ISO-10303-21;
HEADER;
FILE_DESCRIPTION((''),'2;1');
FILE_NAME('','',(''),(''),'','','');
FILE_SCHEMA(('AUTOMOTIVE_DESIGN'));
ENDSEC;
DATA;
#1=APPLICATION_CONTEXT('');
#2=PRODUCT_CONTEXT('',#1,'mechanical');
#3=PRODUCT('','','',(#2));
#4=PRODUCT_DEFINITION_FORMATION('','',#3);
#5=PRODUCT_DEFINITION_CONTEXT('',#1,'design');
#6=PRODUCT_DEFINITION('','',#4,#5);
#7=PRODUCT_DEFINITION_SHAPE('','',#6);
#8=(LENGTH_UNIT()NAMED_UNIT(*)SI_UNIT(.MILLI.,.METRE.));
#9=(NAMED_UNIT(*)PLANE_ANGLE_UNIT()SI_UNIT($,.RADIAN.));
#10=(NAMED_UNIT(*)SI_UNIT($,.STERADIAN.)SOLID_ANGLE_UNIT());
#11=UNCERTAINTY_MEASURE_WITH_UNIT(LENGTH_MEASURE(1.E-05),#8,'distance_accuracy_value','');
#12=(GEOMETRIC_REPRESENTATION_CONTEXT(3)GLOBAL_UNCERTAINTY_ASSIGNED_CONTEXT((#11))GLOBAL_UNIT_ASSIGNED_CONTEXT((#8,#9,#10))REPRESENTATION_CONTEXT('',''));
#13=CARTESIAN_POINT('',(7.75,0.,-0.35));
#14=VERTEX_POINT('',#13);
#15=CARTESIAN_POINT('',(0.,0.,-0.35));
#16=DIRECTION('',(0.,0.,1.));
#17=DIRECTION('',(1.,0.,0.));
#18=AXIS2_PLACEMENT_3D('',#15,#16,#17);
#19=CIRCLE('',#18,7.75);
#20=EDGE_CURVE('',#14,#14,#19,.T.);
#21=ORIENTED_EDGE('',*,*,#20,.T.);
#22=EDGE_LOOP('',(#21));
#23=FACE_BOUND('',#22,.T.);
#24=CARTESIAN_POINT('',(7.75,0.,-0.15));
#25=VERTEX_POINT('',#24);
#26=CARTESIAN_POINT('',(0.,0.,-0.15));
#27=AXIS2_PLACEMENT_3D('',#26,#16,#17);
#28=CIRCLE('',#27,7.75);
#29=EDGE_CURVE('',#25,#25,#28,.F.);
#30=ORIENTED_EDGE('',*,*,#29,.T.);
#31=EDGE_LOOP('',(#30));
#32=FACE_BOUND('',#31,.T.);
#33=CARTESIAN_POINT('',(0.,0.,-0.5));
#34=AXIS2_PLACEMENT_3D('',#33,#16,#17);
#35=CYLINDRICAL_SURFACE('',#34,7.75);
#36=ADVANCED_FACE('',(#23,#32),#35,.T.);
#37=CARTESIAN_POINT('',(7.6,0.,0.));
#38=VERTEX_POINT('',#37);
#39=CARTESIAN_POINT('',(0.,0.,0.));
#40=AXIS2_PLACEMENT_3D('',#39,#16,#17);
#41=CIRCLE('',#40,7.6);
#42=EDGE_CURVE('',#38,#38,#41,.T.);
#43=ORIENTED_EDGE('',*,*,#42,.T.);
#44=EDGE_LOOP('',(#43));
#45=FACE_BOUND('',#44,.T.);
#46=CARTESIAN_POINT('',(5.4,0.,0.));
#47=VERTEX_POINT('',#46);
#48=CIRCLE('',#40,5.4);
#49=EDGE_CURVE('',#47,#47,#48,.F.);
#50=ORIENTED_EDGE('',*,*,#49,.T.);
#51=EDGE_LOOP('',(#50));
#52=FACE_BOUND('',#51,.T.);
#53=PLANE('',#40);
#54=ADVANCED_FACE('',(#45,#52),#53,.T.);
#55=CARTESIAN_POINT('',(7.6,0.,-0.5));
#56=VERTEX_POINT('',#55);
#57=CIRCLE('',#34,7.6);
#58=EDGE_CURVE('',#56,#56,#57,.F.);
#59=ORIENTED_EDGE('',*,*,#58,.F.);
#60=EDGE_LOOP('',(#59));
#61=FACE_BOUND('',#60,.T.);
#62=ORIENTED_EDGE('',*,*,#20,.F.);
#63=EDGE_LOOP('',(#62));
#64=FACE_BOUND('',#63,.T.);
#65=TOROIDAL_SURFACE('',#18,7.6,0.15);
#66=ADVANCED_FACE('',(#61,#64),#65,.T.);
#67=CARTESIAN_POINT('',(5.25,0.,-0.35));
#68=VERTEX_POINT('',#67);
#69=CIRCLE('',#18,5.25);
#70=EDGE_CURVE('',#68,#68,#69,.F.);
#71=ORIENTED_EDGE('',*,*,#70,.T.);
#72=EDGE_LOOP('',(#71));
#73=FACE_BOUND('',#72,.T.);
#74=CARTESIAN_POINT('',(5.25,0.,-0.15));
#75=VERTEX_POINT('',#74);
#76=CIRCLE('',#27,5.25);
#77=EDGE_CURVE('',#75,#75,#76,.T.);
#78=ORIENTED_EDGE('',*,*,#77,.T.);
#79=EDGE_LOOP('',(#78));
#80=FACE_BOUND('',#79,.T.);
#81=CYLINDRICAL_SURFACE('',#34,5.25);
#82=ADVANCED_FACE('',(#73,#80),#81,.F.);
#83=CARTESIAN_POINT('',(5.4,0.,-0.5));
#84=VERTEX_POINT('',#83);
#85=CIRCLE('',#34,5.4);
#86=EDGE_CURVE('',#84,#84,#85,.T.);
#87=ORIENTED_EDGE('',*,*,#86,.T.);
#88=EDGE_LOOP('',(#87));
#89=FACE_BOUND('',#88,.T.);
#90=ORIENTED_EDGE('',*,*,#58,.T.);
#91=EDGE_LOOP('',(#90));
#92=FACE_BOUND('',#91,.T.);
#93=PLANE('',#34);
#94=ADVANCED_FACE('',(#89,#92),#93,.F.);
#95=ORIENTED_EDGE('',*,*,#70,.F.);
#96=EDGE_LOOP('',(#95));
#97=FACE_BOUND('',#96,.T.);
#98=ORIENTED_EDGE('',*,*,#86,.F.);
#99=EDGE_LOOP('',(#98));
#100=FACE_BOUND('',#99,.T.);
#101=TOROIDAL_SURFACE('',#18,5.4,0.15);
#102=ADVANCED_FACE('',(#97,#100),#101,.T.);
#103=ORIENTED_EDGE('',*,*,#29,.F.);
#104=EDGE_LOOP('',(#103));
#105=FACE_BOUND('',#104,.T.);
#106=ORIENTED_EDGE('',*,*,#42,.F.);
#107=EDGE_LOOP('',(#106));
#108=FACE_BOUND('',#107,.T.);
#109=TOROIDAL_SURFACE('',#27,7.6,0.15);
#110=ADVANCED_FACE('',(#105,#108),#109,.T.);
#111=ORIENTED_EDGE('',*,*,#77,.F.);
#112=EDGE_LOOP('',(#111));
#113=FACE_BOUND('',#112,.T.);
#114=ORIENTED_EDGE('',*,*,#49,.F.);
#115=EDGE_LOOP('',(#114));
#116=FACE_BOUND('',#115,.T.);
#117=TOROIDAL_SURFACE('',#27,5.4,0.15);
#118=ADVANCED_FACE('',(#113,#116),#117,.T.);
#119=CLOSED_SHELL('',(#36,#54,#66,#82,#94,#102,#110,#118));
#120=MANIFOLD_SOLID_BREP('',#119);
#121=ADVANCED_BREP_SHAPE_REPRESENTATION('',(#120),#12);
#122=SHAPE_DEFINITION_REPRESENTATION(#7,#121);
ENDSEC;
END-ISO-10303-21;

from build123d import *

# Parameters (mm, degrees)
SKETCH1_R          = 7.75
SKETCH1_R_2        = 5.25
BASE_FLANGE1_DEPTH = 0.5
FILLET1_R          = 0.15


# Sheet-metal steps are written as plain solids
with BuildPart() as part:
    # Sketch1 → Base-Flange1 (new body)
    with BuildSketch(Plane.XY):
        Circle(SKETCH1_R)
        Circle(SKETCH1_R_2, mode=Mode.SUBTRACT)
    extrude(amount=-BASE_FLANGE1_DEPTH)

    # Fillet1
    fillet1_edges = [part.edges().sort_by_distance(p)[0] for p in [
        (-7.75, 0, 0),
        (-7.75, 0, -0.5),
        (-5.25, 0, -0.5),
        (-5.25, 0, 0),
    ]]
    fillet(fillet1_edges, radius=FILLET1_R)


solid = part.part
